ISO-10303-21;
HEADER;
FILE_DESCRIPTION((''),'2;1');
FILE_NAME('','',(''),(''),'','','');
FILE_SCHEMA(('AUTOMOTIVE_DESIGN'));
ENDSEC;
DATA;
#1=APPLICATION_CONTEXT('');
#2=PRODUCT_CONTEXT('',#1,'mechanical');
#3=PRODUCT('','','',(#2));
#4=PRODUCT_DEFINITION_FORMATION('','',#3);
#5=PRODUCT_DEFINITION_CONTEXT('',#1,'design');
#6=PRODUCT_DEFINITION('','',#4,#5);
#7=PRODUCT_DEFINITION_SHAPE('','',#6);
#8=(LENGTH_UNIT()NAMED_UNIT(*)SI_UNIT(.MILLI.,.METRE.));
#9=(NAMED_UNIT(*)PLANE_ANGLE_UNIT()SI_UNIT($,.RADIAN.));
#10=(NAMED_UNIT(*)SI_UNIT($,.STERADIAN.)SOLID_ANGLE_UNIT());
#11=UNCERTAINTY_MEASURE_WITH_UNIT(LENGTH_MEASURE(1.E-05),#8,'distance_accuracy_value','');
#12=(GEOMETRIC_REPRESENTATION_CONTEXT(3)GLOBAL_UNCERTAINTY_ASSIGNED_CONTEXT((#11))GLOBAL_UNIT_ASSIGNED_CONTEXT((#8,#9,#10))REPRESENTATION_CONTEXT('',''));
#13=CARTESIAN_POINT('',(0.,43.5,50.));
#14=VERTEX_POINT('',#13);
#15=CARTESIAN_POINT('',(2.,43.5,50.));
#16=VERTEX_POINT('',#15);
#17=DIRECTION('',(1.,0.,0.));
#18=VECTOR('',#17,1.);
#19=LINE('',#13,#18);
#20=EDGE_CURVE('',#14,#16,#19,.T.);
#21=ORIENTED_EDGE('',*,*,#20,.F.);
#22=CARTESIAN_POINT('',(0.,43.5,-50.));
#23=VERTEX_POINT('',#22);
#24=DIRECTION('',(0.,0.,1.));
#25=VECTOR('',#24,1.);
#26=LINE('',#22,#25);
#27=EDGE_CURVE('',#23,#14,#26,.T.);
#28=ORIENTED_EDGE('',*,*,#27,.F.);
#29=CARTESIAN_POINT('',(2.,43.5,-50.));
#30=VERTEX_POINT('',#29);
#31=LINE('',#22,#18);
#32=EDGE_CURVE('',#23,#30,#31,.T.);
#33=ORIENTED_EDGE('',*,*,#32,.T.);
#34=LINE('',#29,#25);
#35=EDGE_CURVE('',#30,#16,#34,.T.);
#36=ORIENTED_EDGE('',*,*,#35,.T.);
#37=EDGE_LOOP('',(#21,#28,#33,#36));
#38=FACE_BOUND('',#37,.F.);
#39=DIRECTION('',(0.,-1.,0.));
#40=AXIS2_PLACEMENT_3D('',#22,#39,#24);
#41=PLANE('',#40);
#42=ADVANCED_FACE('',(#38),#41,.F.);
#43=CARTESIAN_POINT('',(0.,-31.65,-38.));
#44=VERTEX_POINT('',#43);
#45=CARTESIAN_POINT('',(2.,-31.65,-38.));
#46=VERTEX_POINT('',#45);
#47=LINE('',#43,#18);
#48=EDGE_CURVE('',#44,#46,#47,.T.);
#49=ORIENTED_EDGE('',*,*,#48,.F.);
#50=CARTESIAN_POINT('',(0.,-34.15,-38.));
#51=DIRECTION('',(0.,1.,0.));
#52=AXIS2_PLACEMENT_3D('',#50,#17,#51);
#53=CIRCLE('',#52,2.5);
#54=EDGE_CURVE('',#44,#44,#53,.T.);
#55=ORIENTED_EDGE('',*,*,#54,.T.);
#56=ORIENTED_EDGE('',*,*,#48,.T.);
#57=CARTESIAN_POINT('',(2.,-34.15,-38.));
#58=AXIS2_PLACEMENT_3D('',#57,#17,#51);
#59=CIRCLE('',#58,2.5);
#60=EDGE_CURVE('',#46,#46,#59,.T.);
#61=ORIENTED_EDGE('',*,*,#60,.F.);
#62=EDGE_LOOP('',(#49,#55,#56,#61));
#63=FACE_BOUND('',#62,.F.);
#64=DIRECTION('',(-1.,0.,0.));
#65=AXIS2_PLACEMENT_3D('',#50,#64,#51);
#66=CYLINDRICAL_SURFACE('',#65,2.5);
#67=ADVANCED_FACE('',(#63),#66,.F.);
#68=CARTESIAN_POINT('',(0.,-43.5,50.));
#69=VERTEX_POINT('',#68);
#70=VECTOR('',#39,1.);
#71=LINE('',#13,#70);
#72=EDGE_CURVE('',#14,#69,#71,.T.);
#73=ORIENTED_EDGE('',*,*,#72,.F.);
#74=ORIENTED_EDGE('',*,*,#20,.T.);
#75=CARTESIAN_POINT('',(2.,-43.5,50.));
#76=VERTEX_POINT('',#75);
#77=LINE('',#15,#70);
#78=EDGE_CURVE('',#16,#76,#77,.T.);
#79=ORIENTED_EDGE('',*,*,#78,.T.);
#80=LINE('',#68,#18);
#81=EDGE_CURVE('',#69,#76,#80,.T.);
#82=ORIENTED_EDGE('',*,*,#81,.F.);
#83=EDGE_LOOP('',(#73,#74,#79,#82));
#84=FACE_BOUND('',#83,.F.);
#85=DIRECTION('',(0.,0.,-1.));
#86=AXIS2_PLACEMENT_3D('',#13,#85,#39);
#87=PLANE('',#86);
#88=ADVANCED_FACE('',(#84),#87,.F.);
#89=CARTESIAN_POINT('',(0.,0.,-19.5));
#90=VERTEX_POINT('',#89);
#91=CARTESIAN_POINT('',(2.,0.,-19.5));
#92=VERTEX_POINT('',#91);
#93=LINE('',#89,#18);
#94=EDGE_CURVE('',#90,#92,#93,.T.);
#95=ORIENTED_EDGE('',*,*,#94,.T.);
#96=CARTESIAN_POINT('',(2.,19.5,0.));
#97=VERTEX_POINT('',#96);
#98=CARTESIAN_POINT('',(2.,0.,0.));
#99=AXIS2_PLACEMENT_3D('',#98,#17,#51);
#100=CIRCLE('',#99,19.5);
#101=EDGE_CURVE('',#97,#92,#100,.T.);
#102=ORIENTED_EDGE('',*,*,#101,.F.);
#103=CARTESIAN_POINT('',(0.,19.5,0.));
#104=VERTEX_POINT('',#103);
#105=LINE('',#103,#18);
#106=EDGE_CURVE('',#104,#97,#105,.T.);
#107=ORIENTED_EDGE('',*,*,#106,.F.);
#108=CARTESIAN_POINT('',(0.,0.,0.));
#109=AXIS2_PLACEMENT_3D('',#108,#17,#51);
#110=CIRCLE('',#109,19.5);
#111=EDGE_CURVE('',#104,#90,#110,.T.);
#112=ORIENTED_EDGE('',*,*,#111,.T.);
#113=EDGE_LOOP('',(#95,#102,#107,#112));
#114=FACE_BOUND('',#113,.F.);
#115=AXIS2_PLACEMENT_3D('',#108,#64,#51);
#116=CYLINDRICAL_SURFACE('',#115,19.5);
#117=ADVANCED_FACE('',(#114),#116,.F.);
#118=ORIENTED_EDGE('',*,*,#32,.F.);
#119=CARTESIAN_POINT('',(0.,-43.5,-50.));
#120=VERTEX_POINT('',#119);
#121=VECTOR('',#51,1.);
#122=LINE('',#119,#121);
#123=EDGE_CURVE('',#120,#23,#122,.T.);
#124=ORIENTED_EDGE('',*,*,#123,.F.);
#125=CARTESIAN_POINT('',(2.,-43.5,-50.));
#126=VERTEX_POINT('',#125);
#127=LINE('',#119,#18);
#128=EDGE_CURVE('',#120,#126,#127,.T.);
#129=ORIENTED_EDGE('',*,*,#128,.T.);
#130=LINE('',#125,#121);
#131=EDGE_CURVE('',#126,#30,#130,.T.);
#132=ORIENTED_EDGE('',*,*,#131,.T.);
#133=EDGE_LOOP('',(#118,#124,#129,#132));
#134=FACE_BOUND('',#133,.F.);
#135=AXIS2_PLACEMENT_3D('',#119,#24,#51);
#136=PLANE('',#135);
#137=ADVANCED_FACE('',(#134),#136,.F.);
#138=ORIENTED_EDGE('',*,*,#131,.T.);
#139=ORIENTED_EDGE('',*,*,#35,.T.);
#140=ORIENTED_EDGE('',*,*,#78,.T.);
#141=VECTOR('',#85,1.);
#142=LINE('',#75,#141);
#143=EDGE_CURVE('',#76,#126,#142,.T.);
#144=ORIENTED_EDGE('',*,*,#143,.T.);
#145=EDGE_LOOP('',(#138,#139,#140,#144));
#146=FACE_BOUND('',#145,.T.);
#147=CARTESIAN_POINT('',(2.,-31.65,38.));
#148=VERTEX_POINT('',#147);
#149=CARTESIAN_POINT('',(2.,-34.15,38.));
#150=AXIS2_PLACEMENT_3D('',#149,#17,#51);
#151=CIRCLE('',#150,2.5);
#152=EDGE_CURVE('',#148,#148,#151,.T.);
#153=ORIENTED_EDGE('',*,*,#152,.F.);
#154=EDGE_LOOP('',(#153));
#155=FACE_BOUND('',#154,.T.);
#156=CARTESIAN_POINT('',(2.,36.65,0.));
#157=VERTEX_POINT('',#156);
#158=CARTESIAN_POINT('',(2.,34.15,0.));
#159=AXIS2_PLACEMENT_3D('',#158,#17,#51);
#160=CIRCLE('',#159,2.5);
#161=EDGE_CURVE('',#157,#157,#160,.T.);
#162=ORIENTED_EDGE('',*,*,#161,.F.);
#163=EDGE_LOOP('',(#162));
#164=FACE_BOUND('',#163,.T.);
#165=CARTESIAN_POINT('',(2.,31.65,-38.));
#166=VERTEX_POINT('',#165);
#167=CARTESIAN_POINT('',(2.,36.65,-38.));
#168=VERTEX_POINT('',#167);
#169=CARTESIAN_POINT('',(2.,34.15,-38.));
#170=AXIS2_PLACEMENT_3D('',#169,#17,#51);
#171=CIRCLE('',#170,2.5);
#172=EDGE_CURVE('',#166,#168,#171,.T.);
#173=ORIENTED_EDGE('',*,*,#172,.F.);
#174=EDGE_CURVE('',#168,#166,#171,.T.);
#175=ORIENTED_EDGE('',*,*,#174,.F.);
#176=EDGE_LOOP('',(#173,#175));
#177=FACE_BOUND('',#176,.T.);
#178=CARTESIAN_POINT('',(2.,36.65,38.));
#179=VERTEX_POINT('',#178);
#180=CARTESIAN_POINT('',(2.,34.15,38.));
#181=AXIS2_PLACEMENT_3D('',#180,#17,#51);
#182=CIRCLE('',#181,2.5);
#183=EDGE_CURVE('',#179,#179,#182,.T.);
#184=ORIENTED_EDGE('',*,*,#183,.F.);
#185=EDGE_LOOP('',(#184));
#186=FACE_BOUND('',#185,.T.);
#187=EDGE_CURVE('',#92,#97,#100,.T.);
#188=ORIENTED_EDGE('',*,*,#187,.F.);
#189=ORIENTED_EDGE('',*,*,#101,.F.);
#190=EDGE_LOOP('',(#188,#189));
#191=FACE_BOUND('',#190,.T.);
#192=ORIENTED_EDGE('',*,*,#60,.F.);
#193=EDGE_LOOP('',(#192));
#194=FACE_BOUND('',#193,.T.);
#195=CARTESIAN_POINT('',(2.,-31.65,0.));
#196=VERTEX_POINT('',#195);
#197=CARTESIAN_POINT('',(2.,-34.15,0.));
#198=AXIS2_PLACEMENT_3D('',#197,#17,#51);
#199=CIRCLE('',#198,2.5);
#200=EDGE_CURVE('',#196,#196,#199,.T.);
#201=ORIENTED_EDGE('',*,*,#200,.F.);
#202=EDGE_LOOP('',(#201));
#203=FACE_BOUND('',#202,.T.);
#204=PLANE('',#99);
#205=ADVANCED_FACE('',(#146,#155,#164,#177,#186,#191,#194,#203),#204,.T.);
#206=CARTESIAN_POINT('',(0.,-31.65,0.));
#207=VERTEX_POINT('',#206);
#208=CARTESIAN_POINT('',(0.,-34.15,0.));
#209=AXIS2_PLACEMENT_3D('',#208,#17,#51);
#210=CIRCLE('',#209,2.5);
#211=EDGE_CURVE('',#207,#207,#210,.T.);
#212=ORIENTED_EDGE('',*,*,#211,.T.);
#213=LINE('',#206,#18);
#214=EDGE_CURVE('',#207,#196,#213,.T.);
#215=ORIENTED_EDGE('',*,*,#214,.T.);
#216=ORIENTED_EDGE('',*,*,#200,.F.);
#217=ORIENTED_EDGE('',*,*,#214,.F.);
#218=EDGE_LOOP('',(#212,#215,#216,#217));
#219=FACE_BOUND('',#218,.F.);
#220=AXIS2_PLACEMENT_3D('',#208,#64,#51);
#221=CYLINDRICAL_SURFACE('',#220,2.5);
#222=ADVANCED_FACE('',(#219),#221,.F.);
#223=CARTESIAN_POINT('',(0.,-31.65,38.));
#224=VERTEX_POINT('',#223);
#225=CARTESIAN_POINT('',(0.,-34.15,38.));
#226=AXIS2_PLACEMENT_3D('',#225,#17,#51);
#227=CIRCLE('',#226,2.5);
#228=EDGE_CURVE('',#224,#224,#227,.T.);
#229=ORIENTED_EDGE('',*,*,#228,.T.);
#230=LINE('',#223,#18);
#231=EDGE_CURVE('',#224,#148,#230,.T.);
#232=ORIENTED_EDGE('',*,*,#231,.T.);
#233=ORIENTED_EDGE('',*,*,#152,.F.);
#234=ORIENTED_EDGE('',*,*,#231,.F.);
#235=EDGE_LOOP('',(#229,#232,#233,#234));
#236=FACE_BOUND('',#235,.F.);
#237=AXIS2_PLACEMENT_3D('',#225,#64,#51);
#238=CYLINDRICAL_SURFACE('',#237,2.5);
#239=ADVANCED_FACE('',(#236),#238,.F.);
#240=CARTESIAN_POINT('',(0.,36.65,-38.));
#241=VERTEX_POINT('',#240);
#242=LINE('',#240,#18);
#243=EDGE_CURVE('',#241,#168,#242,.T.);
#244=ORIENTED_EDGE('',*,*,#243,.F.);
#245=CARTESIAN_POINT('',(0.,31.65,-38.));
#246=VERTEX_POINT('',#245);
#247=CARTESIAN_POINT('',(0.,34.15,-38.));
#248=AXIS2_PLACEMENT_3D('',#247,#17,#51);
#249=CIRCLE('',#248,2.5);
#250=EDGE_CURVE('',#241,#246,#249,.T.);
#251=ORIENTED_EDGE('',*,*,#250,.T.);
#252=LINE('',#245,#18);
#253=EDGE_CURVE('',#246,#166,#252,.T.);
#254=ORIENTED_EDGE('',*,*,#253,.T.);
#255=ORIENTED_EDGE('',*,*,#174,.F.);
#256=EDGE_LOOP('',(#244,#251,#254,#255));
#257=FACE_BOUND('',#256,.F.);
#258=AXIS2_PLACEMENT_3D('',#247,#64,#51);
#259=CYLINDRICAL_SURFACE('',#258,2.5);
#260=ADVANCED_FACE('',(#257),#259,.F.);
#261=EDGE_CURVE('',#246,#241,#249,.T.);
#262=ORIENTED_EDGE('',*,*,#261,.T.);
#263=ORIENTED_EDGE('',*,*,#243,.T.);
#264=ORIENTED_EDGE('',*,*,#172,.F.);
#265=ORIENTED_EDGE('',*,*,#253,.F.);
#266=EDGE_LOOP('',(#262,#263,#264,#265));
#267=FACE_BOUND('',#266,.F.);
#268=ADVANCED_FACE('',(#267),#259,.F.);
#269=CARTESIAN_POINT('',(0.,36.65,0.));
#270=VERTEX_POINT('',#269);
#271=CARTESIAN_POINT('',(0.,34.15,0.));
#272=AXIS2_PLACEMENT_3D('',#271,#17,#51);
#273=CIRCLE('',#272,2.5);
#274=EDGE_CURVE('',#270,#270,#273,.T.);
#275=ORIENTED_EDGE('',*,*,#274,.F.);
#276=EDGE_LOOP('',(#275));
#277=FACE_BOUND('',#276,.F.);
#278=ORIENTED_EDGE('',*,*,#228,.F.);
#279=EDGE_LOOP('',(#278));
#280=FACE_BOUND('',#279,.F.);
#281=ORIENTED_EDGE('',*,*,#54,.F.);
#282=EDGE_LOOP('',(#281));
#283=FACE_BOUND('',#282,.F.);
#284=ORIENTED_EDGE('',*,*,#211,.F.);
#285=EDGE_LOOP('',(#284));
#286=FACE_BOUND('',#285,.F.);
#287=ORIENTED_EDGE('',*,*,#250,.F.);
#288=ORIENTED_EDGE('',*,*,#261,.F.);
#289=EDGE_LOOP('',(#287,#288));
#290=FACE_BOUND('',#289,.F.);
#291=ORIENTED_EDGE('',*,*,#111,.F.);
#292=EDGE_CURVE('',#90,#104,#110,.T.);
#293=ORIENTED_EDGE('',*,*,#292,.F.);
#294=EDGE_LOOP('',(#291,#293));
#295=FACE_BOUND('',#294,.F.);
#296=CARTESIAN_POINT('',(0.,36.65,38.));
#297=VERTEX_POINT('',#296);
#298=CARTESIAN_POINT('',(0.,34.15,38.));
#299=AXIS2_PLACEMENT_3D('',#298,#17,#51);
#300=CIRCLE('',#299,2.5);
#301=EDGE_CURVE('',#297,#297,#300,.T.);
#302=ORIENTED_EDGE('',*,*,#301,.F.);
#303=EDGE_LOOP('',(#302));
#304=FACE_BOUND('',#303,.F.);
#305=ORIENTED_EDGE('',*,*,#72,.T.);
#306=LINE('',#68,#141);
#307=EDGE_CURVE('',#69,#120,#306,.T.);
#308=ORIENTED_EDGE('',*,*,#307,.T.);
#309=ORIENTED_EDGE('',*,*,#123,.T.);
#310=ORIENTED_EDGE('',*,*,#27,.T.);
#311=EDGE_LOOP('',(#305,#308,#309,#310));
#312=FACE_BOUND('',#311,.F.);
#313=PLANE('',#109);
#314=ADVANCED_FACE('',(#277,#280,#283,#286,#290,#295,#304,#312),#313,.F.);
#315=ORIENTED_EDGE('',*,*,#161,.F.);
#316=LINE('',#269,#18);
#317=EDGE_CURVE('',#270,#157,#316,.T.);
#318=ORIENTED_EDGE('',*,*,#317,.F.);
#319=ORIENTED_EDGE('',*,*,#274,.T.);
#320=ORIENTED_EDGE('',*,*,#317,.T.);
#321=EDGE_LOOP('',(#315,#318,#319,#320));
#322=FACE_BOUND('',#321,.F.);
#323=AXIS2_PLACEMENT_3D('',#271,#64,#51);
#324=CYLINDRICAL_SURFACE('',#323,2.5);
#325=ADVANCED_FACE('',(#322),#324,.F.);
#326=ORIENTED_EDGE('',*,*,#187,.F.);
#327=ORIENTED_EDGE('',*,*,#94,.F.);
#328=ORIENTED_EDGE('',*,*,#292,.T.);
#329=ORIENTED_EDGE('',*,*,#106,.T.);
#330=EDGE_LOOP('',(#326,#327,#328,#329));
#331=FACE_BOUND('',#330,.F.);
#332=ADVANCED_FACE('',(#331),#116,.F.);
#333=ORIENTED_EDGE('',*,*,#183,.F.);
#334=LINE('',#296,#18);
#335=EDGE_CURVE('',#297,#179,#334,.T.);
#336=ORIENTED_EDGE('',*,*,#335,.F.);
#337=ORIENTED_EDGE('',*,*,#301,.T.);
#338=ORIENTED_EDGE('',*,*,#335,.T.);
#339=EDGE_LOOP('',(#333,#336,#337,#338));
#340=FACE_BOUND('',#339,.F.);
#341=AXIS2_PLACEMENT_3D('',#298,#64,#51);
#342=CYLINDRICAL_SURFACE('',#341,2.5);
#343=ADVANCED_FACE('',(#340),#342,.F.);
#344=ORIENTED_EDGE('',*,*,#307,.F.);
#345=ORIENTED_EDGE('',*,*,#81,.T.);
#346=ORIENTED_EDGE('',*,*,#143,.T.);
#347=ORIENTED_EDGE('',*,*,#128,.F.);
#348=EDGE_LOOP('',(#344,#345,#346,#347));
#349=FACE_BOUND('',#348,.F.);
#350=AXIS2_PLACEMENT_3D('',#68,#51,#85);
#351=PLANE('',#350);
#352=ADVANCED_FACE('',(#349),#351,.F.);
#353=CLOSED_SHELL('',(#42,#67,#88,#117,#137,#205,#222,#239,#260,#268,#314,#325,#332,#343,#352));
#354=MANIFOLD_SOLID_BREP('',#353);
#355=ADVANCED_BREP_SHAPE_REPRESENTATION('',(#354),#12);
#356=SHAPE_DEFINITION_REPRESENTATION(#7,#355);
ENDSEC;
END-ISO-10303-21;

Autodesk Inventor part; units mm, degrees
ref_plane "YZ Plane" through (0, 0, 0) normal (1, 0, 0) x (0, 1, 0)
ref_plane "XZ Plane" through (0, 0, 0) normal (0, 1, 0) x (-1, 0, 0)
ref_plane "XY Plane" through (0, 0, 0) normal (0, 0, 1) x (1, 0, 0)
sketch "Sketch1" plane through (0, 0, 0) normal (1, 0, 0) x (0, 1, 0)
  circle A0 centre (0, 0) radius 19.5
  line L0 (43.5, 50) -> (-43.5, 50)
  line L1 (-43.5, 50) -> (-43.5, -50)
  line L2 (-43.5, -50) -> (43.5, -50)
  line L3 (43.5, -50) -> (43.5, 50)
  line L4 (43.5, 50) -> (-43.5, -50) construction
  line L5 (-43.5, 50) -> (43.5, -50) construction
  line L6 (0, 0) -> (0, -38)
  line L7 (0, -38) -> (34.15, -38)
  circle A1 centre (34.15, -38) radius 2.5
  circle A2 centre (-34.15, -38) radius 2.5
  circle A3 centre (34.15, 0) radius 2.5
  circle A4 centre (-34.15, 0) radius 2.5
  circle A5 centre (34.15, 38) radius 2.5
  circle A6 centre (-34.15, 38) radius 2.5
  dimension "d0" = 39
  dimension "d1" = 87
  dimension "d2" = 100
  dimension "d3" = 38
  dimension "d4" = 34.15
  dimension "d5" = 5
  dimension "d8" = 68.3
  dimension "d11" = 38
extrude "Extrusion1" add sketch "Sketch1" along normal blind 2
properties part number "mount_plate_4x2020" material "Aluminum 6061"
